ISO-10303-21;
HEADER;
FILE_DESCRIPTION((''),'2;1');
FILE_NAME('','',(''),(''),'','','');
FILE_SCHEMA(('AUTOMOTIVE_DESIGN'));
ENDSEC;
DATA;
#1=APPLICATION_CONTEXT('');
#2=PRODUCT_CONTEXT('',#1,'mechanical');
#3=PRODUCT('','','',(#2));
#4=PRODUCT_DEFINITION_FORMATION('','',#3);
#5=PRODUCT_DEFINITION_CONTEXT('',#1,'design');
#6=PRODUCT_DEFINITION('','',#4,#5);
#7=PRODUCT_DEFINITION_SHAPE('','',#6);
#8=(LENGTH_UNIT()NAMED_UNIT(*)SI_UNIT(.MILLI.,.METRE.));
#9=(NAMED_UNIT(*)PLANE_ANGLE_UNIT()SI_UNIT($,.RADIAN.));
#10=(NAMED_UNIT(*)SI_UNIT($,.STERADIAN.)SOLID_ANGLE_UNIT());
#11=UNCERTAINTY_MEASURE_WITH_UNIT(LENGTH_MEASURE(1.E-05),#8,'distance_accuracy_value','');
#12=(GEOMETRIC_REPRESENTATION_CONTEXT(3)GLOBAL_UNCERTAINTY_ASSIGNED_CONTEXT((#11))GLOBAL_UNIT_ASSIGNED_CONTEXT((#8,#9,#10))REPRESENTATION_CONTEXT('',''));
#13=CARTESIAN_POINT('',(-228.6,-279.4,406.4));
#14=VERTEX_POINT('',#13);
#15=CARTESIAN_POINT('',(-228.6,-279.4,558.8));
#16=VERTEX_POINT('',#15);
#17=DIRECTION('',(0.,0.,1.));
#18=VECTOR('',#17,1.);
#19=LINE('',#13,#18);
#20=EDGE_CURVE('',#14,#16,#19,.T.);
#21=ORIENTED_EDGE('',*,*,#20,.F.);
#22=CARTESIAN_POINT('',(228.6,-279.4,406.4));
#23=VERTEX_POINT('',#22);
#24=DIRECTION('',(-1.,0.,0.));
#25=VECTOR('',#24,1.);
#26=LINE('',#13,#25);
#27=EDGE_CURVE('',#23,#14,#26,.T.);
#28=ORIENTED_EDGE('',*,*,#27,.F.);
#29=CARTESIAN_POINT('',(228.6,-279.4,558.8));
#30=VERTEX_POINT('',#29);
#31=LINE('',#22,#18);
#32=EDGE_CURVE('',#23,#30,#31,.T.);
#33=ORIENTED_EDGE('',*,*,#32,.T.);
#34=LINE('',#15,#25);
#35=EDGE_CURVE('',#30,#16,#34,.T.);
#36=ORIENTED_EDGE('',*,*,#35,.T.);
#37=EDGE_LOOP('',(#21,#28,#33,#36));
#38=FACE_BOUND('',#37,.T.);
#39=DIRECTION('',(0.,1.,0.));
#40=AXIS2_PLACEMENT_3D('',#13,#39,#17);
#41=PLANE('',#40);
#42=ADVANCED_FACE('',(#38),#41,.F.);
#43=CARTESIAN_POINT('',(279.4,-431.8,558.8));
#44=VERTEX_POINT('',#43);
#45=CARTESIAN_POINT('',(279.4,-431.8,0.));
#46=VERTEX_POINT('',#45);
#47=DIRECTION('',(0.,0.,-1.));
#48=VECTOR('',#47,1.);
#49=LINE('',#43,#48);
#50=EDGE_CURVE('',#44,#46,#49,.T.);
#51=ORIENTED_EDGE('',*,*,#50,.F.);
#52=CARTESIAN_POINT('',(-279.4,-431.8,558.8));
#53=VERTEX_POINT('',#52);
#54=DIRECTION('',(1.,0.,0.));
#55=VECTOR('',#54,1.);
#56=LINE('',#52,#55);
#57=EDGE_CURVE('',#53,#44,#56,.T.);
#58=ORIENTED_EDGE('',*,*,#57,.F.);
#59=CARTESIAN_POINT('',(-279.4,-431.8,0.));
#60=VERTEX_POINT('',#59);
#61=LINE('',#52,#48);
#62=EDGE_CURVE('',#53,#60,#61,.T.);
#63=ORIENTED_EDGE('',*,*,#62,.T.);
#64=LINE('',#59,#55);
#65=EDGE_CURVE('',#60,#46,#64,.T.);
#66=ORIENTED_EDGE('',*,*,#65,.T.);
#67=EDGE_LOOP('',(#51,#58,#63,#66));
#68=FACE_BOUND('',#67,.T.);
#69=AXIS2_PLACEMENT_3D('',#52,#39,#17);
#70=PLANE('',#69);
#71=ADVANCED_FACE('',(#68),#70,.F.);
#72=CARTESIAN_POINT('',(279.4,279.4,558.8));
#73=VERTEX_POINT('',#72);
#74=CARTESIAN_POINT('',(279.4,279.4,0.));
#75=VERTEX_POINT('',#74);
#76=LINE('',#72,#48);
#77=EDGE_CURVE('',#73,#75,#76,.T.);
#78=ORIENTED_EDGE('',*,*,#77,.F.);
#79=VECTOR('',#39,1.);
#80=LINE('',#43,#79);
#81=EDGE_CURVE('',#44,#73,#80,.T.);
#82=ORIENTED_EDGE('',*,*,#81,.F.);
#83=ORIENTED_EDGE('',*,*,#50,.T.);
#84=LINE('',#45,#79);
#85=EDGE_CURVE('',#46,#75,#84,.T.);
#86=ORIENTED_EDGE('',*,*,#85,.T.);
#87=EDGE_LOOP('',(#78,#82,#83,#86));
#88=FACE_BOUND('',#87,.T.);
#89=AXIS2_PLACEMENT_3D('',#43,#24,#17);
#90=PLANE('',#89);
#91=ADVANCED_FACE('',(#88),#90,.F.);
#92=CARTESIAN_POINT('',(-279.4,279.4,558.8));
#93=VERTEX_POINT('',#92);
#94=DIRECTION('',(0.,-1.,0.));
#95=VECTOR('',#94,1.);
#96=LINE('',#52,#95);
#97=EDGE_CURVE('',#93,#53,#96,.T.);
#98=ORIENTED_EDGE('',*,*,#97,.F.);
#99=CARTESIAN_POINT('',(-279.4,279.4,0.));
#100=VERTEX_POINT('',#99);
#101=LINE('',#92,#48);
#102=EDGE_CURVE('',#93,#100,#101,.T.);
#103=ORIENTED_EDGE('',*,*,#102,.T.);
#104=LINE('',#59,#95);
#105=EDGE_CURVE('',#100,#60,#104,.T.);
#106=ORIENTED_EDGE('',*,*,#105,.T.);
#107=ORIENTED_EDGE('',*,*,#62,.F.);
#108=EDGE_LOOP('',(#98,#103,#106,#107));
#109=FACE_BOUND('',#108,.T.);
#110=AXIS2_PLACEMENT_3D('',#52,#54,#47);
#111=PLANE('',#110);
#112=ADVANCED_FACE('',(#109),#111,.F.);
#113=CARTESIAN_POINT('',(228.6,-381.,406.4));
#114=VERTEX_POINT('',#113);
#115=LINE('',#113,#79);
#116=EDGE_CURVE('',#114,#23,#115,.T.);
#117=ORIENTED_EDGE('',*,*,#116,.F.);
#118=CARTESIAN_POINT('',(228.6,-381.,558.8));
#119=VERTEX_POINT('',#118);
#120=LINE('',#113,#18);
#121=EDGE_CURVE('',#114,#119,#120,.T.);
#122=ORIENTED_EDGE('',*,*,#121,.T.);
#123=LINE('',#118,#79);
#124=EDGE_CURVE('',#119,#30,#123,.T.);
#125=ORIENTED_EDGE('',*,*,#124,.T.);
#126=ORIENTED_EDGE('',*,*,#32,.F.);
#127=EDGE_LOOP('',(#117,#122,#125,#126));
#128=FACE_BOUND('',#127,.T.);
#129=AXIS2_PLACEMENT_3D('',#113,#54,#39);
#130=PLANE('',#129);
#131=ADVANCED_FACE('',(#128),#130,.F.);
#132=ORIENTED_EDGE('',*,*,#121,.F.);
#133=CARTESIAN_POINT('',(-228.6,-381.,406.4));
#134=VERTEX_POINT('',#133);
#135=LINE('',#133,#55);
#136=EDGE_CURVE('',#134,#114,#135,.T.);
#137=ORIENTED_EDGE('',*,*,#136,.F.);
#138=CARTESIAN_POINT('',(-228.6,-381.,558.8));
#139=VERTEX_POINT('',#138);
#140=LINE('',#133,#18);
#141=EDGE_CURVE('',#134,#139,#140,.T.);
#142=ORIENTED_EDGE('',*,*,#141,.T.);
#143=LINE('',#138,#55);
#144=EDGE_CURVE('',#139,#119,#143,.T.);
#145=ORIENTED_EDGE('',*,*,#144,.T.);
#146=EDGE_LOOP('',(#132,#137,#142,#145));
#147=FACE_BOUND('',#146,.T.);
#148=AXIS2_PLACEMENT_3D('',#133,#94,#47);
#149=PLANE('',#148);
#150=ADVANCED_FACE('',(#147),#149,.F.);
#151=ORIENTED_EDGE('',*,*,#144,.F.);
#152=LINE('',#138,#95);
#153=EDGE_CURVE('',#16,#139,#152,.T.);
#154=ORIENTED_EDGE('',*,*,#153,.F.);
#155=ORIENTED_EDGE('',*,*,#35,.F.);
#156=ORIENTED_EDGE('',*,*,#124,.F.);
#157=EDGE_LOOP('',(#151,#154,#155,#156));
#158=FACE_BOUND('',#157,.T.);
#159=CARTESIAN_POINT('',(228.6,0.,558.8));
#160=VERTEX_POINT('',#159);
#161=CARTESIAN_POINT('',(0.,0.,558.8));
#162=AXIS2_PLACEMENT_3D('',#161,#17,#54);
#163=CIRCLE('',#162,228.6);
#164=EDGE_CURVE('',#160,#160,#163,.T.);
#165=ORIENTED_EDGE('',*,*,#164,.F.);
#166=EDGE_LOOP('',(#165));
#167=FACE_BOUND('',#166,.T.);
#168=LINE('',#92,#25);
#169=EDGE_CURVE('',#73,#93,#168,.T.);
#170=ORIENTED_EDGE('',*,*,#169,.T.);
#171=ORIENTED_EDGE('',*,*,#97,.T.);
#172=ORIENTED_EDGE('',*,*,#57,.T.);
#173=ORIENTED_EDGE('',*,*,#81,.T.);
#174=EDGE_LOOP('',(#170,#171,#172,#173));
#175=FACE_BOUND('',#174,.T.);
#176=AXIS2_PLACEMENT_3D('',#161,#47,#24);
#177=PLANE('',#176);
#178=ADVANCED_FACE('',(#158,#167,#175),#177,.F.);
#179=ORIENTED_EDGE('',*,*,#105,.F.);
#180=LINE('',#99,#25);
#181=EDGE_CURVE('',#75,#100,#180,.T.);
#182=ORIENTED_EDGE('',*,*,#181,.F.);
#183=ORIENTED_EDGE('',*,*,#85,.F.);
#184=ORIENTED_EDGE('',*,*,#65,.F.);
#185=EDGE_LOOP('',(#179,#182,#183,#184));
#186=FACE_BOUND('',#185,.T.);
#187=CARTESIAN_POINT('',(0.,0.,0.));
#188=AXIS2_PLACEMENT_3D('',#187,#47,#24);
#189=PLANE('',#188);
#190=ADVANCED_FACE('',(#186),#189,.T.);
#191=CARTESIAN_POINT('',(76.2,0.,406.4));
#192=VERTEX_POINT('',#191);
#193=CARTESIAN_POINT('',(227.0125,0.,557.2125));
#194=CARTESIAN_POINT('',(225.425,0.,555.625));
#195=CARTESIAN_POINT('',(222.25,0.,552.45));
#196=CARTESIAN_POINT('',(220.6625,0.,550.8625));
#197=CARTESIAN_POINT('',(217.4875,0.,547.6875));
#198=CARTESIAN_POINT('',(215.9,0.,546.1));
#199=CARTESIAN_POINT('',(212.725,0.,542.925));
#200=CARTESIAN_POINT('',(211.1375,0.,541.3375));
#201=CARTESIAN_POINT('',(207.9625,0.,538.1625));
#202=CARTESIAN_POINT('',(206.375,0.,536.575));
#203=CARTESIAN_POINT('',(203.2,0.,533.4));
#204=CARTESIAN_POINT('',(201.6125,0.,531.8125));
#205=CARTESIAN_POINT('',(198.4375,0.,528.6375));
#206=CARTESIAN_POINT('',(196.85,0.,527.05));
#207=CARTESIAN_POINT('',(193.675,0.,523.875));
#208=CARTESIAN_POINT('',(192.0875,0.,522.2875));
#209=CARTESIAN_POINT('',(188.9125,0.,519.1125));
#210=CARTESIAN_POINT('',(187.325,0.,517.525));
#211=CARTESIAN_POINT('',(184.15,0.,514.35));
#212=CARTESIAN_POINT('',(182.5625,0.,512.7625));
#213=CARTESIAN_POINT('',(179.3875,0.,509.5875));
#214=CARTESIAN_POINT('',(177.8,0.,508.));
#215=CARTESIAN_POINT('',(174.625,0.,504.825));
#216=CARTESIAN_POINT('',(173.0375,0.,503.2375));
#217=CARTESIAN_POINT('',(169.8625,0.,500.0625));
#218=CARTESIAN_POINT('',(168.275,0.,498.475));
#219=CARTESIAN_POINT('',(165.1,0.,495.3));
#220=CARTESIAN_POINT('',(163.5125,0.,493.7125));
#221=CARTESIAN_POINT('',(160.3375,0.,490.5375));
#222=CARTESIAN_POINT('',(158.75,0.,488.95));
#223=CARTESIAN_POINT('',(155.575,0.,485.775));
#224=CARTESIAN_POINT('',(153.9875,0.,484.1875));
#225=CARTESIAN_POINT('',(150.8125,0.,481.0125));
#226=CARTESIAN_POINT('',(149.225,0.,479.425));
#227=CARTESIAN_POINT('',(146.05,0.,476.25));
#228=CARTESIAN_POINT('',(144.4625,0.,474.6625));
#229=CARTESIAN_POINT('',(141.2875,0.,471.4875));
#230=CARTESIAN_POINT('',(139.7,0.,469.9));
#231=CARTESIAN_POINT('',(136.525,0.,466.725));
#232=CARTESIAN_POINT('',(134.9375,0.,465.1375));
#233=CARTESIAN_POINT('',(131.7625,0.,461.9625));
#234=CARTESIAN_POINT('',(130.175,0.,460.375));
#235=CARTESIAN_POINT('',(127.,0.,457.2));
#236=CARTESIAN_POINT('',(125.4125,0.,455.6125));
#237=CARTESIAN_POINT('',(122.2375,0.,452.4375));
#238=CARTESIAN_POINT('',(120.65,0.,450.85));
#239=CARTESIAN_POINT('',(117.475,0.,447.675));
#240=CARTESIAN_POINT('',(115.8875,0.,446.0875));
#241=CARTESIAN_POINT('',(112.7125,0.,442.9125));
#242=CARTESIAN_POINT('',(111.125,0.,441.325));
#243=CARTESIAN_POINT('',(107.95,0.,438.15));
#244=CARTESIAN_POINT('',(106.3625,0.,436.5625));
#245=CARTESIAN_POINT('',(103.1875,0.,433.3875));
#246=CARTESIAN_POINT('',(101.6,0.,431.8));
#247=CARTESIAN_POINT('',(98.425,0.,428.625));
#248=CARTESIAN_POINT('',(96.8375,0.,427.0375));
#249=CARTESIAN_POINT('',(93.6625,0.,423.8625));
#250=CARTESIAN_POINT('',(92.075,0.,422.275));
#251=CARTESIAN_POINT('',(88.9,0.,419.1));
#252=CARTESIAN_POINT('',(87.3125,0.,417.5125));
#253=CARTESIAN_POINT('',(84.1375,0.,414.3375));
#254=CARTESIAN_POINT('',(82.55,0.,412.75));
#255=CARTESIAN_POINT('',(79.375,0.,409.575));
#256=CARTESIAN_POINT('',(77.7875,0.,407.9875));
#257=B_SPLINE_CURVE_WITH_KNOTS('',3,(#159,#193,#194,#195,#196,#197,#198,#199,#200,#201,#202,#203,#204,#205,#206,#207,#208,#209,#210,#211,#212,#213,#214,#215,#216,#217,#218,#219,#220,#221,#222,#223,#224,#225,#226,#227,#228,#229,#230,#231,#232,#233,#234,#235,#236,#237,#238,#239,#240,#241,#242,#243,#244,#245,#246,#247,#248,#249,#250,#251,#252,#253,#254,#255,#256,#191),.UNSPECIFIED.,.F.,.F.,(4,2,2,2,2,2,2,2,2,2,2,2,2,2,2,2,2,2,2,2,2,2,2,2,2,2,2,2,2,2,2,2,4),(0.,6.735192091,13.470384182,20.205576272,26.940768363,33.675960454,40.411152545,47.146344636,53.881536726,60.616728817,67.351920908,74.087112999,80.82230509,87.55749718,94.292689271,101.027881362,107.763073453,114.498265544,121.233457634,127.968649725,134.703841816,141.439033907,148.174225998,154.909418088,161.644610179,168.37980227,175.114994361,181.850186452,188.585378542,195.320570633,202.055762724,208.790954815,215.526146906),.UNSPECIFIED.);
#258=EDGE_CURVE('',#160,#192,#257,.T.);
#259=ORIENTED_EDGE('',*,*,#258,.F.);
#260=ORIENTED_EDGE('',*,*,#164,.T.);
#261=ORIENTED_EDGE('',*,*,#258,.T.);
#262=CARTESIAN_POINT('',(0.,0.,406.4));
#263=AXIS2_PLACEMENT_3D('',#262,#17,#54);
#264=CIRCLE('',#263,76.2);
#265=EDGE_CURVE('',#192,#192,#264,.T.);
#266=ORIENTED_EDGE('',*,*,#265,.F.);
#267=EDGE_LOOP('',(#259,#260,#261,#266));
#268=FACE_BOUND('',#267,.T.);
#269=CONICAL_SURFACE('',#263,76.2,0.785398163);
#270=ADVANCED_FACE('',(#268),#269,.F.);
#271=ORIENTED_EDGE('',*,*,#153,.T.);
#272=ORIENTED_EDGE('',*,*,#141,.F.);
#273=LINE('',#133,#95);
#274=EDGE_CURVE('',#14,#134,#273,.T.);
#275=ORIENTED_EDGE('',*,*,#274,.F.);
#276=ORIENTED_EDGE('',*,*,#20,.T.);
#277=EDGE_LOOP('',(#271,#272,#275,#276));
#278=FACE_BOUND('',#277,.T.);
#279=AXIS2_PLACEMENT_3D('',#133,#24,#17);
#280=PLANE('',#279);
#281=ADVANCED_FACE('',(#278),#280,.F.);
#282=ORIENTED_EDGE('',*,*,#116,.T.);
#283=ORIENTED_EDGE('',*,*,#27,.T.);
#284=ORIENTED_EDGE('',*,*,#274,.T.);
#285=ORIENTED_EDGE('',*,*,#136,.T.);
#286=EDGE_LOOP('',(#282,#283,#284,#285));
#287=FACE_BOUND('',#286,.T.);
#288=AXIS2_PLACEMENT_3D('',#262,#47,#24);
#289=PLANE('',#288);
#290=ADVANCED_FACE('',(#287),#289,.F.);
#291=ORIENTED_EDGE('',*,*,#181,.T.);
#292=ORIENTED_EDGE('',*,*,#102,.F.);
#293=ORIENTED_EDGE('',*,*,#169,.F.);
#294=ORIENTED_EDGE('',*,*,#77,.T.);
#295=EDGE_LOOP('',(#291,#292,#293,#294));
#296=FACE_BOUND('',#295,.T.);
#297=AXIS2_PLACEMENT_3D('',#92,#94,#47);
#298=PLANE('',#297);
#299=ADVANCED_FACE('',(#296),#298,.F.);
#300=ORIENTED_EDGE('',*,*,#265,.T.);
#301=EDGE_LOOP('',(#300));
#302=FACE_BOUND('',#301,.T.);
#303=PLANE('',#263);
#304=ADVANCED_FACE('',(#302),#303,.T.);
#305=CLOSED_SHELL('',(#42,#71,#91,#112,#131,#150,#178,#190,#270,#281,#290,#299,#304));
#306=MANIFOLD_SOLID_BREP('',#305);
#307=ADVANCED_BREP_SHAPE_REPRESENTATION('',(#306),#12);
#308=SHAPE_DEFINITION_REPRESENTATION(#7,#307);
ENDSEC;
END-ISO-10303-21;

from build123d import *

# Parameters (mm, degrees)
SKETCH1_W           = 558.8
SKETCH1_H           = 711.2
BOSS_EXTRUDE1_DEPTH = 558.8
SKETCH2_R           = 228.6
SKETCH2_W           = 457.2
SKETCH2_H           = 101.6
CUT_EXTRUDE1_DEPTH  = 152.4
CHAMFER1_SIZE       = 152.4


with BuildPart() as part:
    # Sketch1 → Boss-Extrude1 (new body)
    with BuildSketch(Plane.XY):
        with Locations((0, -76.2)):
            Rectangle(SKETCH1_W, SKETCH1_H)
    extrude(amount=BOSS_EXTRUDE1_DEPTH)

    # Sketch2 → Cut-Extrude1 (cut)
    with BuildSketch(Plane.XY.offset(558.8)):
        Circle(SKETCH2_R)
        with Locations((0, -330.2)):
            Rectangle(SKETCH2_W, SKETCH2_H)
    extrude(amount=-CUT_EXTRUDE1_DEPTH, mode=Mode.SUBTRACT)

    # Chamfer1
    chamfer1_edges = [part.edges().sort_by_distance(p)[0] for p in [
        (-228.6, 0, 406.4),
    ]]
    chamfer(chamfer1_edges, length=CHAMFER1_SIZE - 0.0001)  # a hair under: the kernel refuses the full size


solid = part.part
